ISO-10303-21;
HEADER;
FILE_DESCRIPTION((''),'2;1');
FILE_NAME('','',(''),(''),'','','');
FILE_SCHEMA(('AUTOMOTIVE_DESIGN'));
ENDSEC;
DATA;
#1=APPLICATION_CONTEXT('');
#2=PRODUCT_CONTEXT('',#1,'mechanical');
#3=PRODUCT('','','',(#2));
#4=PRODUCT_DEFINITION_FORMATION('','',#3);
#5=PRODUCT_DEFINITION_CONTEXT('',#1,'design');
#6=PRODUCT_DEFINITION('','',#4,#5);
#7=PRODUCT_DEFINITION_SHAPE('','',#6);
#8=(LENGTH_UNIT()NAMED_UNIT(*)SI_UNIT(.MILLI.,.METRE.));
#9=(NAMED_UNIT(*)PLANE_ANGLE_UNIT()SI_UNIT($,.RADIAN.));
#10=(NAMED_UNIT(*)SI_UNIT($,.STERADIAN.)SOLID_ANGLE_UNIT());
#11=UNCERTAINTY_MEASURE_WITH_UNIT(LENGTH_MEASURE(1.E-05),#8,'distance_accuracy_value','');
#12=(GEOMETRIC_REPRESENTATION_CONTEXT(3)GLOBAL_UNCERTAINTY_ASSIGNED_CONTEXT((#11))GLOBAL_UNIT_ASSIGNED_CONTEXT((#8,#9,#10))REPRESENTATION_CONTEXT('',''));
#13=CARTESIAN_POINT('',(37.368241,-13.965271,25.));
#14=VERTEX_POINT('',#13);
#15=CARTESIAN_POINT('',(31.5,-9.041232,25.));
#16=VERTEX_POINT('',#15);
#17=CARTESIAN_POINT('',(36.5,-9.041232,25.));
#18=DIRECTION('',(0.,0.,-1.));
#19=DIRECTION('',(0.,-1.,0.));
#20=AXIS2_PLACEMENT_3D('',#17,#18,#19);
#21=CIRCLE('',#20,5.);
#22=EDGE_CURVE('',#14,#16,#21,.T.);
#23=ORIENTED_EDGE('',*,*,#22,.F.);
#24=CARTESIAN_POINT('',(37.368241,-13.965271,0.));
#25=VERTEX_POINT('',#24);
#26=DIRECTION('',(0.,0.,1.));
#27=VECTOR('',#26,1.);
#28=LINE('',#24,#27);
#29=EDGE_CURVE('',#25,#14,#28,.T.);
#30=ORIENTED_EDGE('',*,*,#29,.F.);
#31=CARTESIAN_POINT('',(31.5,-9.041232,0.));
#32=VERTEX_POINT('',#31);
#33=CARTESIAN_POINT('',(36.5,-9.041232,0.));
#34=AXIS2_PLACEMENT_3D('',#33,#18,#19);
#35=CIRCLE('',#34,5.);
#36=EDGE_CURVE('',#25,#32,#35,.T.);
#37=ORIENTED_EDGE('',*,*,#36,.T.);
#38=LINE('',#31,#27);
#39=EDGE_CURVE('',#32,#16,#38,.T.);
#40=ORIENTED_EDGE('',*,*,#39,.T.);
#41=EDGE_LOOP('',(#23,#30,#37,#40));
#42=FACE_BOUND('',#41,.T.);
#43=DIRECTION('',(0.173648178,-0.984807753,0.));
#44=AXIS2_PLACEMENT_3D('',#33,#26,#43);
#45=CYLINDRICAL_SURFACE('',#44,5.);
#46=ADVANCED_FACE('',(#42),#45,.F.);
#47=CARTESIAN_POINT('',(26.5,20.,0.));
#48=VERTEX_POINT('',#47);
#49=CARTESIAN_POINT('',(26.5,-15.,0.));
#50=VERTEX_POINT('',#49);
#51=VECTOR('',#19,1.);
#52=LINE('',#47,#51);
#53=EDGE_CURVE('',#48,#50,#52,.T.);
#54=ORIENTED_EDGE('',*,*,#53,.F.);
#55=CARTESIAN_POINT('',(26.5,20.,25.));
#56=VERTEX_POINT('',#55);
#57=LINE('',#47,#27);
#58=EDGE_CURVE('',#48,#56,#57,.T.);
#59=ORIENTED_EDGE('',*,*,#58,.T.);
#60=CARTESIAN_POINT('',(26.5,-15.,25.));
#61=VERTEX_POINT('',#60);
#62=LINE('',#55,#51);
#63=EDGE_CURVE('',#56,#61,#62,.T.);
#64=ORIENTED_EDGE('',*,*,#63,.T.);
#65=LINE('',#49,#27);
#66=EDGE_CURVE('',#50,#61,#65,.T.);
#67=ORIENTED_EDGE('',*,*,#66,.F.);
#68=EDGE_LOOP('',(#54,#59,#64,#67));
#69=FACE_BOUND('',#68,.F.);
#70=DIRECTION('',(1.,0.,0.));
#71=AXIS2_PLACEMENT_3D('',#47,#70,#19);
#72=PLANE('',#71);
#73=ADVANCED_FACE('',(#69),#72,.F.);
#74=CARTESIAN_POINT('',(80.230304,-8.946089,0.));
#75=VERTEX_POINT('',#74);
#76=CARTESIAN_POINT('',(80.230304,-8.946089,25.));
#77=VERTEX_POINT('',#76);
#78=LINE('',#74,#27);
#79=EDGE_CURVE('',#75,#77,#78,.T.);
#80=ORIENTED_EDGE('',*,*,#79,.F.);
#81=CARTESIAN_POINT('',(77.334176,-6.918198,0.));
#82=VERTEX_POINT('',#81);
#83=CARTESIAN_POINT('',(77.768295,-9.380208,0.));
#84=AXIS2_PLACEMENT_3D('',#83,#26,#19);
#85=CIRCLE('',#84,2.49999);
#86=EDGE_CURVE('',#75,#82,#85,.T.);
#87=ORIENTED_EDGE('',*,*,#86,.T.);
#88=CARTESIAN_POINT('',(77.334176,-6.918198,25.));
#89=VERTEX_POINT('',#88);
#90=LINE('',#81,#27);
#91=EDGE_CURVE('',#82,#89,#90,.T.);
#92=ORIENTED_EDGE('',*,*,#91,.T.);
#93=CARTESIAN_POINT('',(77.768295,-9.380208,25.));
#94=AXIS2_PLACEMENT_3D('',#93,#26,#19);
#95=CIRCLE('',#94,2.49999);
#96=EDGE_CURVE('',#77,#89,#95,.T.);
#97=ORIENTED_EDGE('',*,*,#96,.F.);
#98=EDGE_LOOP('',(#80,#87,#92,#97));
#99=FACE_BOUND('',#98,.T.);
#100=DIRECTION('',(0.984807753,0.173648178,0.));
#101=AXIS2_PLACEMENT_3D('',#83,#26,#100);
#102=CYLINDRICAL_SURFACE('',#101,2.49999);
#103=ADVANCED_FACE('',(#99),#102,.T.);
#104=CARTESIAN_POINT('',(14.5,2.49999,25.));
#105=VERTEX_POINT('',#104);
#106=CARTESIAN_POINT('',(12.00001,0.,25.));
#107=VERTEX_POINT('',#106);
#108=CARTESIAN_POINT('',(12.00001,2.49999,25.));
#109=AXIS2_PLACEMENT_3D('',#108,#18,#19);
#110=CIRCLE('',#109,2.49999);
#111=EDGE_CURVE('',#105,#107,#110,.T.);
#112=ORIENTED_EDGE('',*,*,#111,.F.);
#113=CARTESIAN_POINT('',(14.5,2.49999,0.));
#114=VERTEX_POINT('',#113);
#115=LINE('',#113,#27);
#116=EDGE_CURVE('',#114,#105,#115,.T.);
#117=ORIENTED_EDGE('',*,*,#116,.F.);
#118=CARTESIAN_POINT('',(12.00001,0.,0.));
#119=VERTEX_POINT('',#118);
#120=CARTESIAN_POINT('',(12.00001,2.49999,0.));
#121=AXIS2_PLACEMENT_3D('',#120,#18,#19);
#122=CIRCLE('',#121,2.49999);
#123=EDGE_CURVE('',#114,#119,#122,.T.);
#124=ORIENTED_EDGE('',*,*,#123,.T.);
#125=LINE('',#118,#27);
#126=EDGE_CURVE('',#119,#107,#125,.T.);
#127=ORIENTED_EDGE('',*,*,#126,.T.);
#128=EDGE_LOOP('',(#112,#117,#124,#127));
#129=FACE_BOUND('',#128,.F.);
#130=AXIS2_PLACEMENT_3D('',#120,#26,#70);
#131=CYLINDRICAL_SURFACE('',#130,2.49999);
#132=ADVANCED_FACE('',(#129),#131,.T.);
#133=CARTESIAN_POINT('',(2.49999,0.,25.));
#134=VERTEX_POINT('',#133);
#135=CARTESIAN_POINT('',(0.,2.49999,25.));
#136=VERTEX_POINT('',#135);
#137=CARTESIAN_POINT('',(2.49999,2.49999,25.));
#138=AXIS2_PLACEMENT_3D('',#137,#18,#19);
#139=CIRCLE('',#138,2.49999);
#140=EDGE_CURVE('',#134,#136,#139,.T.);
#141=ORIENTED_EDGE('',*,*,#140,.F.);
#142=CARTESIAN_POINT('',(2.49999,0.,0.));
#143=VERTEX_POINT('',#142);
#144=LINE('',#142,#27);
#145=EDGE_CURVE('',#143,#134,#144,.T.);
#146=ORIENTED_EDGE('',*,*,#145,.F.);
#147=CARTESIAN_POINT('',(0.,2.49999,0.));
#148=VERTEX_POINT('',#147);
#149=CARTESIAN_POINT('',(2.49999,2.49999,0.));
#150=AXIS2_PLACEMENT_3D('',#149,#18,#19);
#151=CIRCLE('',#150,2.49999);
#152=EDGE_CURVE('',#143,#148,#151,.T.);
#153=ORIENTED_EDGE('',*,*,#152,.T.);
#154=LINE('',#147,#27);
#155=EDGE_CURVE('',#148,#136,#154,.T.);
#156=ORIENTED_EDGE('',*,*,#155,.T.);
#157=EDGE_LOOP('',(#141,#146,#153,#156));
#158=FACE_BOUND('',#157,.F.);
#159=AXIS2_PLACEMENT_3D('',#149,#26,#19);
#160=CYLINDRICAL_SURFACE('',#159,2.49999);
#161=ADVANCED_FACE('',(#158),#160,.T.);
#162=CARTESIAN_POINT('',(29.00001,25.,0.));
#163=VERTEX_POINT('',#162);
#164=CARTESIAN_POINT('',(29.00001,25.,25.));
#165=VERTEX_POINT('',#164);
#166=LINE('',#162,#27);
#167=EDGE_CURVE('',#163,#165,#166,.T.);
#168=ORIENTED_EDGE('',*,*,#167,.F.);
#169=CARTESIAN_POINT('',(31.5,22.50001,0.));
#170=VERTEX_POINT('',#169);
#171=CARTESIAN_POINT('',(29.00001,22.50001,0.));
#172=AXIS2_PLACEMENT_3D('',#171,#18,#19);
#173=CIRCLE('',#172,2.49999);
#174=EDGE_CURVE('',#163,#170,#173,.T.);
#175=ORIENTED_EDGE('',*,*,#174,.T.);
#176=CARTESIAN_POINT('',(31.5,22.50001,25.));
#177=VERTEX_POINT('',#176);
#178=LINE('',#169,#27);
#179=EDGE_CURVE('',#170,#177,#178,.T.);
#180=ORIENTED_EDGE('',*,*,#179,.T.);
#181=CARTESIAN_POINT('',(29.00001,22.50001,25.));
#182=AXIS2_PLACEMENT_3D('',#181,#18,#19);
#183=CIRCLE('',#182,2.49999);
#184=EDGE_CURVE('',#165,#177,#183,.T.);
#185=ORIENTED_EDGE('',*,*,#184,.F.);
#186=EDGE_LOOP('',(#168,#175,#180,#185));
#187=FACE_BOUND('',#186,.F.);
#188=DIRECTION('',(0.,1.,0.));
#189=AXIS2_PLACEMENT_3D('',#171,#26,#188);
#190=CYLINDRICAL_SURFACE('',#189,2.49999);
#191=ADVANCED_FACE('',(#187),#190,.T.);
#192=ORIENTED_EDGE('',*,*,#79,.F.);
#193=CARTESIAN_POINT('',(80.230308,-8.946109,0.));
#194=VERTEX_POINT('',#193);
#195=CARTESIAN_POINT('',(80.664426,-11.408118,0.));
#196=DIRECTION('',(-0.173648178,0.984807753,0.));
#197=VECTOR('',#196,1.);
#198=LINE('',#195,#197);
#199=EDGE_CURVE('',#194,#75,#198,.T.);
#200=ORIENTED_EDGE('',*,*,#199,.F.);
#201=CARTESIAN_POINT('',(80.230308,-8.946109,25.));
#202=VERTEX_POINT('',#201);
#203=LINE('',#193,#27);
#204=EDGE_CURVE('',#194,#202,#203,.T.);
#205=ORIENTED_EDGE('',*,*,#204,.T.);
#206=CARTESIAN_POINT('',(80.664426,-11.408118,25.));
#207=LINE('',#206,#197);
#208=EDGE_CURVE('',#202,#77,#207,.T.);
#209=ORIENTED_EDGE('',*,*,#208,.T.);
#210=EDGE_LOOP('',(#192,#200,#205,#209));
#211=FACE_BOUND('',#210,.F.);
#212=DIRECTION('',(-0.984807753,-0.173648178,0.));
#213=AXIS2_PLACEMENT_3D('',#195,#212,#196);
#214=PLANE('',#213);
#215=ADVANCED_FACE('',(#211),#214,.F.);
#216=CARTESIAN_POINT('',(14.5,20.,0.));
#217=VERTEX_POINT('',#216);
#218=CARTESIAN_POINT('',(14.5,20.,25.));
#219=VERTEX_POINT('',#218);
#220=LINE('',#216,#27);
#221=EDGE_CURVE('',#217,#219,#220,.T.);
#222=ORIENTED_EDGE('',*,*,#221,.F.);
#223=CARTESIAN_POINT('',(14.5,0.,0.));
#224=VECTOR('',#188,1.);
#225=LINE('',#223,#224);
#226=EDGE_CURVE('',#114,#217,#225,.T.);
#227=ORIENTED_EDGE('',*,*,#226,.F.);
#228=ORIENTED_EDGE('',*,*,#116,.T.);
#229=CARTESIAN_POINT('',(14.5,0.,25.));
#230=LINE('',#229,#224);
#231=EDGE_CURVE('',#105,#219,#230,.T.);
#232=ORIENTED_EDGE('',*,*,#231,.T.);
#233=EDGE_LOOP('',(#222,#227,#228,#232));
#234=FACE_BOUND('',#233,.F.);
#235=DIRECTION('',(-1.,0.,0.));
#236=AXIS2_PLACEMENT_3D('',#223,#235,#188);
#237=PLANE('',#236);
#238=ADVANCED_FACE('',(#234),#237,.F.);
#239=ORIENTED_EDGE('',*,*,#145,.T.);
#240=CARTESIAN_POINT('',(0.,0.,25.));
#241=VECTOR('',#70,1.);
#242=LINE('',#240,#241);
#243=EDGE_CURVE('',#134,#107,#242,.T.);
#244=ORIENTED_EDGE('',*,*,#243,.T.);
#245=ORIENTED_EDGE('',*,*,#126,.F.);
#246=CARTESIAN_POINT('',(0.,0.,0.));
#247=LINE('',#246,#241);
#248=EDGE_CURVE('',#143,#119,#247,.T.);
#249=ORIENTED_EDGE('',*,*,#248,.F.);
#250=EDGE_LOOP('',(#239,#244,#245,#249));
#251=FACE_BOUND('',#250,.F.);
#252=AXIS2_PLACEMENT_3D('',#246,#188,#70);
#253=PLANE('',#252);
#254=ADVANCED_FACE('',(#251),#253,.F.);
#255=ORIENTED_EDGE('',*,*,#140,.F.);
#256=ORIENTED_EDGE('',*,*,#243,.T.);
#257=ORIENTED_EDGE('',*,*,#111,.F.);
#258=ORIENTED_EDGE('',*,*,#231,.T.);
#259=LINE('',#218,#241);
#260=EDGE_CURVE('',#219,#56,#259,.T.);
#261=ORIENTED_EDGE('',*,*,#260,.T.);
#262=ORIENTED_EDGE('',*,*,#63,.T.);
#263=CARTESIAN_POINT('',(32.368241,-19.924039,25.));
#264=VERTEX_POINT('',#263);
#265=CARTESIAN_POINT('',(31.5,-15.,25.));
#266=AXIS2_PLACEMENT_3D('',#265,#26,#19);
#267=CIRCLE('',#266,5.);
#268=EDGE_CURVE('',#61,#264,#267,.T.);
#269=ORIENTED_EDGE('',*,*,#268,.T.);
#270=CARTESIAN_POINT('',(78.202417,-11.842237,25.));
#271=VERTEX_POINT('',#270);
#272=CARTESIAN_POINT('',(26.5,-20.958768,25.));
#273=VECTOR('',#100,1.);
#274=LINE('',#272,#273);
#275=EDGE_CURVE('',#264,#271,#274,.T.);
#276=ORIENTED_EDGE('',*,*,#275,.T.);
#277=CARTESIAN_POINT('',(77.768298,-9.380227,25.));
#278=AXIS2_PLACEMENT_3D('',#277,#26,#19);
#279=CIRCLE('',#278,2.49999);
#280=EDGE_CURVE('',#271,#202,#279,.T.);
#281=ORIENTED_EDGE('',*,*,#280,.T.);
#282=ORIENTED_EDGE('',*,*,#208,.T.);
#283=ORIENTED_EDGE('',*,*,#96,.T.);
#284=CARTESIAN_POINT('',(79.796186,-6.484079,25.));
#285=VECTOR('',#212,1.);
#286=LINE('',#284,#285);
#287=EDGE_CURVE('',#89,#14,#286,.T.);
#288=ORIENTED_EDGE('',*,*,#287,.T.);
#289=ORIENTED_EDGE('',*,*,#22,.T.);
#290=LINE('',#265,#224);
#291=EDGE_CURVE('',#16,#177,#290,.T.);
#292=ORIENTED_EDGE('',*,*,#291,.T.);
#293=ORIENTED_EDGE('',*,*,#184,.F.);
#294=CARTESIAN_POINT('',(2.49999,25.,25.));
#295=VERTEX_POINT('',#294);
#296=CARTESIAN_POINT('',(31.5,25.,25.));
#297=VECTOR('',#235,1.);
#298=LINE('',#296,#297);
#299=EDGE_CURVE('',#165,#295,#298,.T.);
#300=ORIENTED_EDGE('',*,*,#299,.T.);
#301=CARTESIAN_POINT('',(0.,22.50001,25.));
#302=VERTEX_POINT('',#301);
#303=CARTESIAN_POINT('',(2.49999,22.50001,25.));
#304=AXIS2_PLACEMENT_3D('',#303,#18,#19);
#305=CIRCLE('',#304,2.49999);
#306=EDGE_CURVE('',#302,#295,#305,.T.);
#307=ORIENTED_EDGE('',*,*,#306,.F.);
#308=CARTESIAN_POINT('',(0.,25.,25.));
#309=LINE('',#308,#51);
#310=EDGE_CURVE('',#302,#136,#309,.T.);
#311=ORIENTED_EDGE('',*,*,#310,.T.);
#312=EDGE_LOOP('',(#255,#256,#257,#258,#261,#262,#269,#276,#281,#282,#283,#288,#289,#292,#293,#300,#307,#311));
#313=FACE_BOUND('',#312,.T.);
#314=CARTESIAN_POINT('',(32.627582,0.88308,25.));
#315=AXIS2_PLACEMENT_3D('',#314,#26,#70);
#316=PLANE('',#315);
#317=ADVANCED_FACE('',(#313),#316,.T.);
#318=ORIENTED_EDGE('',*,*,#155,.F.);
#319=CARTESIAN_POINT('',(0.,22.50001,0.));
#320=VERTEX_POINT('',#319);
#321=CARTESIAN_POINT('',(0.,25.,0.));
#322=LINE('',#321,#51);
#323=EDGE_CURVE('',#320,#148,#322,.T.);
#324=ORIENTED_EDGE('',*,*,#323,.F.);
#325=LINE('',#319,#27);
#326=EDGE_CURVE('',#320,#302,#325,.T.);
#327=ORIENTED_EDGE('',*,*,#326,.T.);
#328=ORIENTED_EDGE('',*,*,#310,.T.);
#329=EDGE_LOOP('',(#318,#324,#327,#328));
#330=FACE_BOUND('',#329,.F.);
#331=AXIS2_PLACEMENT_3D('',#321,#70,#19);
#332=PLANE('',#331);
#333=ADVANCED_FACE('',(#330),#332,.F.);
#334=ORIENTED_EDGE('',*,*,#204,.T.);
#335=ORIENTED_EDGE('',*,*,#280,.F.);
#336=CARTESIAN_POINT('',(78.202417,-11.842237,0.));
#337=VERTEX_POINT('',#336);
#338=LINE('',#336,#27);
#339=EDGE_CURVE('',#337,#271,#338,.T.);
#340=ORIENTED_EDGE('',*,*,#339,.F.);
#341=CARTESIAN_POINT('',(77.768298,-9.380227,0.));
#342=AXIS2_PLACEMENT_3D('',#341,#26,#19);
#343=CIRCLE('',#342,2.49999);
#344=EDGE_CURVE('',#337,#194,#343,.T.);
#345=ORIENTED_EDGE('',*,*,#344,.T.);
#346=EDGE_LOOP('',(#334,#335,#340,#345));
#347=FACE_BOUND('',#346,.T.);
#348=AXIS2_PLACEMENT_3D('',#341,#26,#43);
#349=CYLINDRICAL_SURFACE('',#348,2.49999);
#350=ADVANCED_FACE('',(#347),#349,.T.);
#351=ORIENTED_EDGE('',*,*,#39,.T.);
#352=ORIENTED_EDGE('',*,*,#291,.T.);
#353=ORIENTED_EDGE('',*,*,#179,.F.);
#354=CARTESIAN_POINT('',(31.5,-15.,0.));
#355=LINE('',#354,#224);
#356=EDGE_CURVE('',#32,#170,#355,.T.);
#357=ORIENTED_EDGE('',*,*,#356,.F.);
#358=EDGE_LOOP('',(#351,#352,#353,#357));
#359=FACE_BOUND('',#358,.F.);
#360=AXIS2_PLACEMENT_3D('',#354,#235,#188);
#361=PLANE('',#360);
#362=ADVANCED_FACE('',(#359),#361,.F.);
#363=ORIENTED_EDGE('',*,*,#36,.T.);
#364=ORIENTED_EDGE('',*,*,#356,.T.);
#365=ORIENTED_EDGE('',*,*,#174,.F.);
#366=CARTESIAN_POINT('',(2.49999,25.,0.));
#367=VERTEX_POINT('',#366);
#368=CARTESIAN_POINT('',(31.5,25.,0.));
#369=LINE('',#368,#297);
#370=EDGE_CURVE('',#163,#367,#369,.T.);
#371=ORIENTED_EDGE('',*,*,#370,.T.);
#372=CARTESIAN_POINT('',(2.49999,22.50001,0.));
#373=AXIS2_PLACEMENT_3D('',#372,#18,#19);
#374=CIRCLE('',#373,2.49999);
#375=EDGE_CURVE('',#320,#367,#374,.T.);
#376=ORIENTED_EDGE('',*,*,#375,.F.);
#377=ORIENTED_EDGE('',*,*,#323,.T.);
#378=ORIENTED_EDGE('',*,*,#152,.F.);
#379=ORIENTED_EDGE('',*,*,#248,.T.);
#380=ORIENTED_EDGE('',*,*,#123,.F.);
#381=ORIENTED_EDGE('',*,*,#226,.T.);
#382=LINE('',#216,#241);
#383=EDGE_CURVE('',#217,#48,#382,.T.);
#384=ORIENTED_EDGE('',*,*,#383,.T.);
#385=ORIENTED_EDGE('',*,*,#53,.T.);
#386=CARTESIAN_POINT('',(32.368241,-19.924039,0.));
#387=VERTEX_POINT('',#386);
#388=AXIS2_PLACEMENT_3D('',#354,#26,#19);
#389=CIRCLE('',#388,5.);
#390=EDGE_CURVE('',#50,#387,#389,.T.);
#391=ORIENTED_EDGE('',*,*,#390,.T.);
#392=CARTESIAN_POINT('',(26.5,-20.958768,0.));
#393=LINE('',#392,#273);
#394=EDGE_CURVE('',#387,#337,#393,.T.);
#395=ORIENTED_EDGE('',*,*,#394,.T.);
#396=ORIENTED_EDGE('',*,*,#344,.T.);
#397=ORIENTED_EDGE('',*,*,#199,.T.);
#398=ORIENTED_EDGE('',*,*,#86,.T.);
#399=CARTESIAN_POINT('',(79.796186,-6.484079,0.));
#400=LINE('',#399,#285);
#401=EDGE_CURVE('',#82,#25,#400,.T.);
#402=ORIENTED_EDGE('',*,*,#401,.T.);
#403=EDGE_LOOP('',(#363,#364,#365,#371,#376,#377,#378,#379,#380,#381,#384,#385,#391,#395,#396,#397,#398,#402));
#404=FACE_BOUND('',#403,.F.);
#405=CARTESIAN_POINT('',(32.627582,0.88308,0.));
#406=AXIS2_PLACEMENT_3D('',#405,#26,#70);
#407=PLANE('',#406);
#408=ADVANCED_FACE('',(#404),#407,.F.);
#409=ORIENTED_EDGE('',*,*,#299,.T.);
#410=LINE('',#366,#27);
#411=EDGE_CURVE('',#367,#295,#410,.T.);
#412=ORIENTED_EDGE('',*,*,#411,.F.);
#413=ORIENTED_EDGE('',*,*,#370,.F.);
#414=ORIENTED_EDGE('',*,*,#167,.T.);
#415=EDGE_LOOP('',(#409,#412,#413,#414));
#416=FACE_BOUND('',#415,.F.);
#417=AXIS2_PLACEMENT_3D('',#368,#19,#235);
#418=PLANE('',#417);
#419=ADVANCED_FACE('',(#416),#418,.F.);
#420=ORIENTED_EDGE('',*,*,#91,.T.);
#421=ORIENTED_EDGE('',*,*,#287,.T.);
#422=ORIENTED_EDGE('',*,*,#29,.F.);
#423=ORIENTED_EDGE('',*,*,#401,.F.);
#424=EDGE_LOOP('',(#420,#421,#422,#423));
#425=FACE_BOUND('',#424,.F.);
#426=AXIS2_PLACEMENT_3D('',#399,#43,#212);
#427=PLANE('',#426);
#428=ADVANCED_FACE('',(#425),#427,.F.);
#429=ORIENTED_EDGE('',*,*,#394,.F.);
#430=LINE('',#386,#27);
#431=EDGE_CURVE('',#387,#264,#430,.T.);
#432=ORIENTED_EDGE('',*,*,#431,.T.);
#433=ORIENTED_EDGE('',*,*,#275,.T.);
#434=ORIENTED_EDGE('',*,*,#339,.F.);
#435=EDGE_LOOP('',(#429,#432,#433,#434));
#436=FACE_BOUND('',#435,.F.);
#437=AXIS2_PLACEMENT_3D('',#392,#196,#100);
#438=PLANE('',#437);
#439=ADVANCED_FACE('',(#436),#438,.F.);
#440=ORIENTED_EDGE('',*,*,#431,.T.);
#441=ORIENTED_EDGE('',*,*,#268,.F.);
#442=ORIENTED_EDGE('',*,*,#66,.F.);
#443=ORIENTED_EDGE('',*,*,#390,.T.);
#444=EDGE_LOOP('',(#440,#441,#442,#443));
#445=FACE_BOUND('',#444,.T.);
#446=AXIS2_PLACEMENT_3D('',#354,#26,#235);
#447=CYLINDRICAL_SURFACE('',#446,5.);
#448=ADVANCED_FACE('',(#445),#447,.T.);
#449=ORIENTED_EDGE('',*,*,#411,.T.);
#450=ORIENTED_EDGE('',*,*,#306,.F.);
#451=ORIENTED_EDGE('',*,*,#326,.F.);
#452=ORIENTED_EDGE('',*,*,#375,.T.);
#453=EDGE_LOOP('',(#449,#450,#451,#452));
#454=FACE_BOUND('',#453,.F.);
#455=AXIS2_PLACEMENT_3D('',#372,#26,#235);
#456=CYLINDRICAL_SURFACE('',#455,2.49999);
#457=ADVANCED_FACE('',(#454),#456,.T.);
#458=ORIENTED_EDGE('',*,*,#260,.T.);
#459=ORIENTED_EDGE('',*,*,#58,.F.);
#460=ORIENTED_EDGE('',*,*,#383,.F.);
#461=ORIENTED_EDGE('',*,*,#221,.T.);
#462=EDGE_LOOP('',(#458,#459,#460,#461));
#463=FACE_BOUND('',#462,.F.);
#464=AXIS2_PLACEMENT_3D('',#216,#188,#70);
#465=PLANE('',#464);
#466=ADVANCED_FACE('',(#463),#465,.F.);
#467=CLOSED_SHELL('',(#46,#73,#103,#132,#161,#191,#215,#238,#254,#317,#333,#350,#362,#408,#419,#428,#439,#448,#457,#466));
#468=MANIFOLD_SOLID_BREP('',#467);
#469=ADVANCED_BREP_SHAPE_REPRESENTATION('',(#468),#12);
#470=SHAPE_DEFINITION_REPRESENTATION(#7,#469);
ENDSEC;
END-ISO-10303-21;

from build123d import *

# Parameters (mm, degrees)
F1_DEPTH = 25
F3_R     = 5
F4_R     = 2.49999


# Not quite as in the source:
# - a fillet or chamfer is up to 0.001 mm smaller than in the source, because OpenCascade refuses the exact size


with BuildPart() as f1:
    # F0 (on Top) → F1 (new body)
    with BuildSketch(Plane.XY):
        Polygon((0, 25), (0, 0), (14.5, 0), (14.5, 20), (26.5, 20), (26.5, -20.958767963), (80.6644264157, -11.4081181913), (79.7961855273, -6.4840794262), (31.5, -15), (31.5, 25), align=None)
    extrude(amount=F1_DEPTH)

    # F3
    f3_edges = [f1.edges().sort_by_distance(p)[0] for p in [
        (26.5, -20.958768, 12.5),
        (31.5, -15, 12.5),
    ]]
    fillet(f3_edges, radius=F3_R)

    # F4 (radius 2.5 in the source; OpenCascade refuses exactly that, so slightly less here)
    f4_edges = [f1.edges().sort_by_distance(p)[0] for p in [
        (31.5, 25, 12.5),
        (79.796186, -6.484079, 12.5),
        (80.664426, -11.408118, 12.5),
        (14.5, 0, 12.5),
        (0, 0, 12.5),
        (0, 25, 12.5),
    ]]
    fillet(f4_edges, radius=F4_R)


solid = f1.part
